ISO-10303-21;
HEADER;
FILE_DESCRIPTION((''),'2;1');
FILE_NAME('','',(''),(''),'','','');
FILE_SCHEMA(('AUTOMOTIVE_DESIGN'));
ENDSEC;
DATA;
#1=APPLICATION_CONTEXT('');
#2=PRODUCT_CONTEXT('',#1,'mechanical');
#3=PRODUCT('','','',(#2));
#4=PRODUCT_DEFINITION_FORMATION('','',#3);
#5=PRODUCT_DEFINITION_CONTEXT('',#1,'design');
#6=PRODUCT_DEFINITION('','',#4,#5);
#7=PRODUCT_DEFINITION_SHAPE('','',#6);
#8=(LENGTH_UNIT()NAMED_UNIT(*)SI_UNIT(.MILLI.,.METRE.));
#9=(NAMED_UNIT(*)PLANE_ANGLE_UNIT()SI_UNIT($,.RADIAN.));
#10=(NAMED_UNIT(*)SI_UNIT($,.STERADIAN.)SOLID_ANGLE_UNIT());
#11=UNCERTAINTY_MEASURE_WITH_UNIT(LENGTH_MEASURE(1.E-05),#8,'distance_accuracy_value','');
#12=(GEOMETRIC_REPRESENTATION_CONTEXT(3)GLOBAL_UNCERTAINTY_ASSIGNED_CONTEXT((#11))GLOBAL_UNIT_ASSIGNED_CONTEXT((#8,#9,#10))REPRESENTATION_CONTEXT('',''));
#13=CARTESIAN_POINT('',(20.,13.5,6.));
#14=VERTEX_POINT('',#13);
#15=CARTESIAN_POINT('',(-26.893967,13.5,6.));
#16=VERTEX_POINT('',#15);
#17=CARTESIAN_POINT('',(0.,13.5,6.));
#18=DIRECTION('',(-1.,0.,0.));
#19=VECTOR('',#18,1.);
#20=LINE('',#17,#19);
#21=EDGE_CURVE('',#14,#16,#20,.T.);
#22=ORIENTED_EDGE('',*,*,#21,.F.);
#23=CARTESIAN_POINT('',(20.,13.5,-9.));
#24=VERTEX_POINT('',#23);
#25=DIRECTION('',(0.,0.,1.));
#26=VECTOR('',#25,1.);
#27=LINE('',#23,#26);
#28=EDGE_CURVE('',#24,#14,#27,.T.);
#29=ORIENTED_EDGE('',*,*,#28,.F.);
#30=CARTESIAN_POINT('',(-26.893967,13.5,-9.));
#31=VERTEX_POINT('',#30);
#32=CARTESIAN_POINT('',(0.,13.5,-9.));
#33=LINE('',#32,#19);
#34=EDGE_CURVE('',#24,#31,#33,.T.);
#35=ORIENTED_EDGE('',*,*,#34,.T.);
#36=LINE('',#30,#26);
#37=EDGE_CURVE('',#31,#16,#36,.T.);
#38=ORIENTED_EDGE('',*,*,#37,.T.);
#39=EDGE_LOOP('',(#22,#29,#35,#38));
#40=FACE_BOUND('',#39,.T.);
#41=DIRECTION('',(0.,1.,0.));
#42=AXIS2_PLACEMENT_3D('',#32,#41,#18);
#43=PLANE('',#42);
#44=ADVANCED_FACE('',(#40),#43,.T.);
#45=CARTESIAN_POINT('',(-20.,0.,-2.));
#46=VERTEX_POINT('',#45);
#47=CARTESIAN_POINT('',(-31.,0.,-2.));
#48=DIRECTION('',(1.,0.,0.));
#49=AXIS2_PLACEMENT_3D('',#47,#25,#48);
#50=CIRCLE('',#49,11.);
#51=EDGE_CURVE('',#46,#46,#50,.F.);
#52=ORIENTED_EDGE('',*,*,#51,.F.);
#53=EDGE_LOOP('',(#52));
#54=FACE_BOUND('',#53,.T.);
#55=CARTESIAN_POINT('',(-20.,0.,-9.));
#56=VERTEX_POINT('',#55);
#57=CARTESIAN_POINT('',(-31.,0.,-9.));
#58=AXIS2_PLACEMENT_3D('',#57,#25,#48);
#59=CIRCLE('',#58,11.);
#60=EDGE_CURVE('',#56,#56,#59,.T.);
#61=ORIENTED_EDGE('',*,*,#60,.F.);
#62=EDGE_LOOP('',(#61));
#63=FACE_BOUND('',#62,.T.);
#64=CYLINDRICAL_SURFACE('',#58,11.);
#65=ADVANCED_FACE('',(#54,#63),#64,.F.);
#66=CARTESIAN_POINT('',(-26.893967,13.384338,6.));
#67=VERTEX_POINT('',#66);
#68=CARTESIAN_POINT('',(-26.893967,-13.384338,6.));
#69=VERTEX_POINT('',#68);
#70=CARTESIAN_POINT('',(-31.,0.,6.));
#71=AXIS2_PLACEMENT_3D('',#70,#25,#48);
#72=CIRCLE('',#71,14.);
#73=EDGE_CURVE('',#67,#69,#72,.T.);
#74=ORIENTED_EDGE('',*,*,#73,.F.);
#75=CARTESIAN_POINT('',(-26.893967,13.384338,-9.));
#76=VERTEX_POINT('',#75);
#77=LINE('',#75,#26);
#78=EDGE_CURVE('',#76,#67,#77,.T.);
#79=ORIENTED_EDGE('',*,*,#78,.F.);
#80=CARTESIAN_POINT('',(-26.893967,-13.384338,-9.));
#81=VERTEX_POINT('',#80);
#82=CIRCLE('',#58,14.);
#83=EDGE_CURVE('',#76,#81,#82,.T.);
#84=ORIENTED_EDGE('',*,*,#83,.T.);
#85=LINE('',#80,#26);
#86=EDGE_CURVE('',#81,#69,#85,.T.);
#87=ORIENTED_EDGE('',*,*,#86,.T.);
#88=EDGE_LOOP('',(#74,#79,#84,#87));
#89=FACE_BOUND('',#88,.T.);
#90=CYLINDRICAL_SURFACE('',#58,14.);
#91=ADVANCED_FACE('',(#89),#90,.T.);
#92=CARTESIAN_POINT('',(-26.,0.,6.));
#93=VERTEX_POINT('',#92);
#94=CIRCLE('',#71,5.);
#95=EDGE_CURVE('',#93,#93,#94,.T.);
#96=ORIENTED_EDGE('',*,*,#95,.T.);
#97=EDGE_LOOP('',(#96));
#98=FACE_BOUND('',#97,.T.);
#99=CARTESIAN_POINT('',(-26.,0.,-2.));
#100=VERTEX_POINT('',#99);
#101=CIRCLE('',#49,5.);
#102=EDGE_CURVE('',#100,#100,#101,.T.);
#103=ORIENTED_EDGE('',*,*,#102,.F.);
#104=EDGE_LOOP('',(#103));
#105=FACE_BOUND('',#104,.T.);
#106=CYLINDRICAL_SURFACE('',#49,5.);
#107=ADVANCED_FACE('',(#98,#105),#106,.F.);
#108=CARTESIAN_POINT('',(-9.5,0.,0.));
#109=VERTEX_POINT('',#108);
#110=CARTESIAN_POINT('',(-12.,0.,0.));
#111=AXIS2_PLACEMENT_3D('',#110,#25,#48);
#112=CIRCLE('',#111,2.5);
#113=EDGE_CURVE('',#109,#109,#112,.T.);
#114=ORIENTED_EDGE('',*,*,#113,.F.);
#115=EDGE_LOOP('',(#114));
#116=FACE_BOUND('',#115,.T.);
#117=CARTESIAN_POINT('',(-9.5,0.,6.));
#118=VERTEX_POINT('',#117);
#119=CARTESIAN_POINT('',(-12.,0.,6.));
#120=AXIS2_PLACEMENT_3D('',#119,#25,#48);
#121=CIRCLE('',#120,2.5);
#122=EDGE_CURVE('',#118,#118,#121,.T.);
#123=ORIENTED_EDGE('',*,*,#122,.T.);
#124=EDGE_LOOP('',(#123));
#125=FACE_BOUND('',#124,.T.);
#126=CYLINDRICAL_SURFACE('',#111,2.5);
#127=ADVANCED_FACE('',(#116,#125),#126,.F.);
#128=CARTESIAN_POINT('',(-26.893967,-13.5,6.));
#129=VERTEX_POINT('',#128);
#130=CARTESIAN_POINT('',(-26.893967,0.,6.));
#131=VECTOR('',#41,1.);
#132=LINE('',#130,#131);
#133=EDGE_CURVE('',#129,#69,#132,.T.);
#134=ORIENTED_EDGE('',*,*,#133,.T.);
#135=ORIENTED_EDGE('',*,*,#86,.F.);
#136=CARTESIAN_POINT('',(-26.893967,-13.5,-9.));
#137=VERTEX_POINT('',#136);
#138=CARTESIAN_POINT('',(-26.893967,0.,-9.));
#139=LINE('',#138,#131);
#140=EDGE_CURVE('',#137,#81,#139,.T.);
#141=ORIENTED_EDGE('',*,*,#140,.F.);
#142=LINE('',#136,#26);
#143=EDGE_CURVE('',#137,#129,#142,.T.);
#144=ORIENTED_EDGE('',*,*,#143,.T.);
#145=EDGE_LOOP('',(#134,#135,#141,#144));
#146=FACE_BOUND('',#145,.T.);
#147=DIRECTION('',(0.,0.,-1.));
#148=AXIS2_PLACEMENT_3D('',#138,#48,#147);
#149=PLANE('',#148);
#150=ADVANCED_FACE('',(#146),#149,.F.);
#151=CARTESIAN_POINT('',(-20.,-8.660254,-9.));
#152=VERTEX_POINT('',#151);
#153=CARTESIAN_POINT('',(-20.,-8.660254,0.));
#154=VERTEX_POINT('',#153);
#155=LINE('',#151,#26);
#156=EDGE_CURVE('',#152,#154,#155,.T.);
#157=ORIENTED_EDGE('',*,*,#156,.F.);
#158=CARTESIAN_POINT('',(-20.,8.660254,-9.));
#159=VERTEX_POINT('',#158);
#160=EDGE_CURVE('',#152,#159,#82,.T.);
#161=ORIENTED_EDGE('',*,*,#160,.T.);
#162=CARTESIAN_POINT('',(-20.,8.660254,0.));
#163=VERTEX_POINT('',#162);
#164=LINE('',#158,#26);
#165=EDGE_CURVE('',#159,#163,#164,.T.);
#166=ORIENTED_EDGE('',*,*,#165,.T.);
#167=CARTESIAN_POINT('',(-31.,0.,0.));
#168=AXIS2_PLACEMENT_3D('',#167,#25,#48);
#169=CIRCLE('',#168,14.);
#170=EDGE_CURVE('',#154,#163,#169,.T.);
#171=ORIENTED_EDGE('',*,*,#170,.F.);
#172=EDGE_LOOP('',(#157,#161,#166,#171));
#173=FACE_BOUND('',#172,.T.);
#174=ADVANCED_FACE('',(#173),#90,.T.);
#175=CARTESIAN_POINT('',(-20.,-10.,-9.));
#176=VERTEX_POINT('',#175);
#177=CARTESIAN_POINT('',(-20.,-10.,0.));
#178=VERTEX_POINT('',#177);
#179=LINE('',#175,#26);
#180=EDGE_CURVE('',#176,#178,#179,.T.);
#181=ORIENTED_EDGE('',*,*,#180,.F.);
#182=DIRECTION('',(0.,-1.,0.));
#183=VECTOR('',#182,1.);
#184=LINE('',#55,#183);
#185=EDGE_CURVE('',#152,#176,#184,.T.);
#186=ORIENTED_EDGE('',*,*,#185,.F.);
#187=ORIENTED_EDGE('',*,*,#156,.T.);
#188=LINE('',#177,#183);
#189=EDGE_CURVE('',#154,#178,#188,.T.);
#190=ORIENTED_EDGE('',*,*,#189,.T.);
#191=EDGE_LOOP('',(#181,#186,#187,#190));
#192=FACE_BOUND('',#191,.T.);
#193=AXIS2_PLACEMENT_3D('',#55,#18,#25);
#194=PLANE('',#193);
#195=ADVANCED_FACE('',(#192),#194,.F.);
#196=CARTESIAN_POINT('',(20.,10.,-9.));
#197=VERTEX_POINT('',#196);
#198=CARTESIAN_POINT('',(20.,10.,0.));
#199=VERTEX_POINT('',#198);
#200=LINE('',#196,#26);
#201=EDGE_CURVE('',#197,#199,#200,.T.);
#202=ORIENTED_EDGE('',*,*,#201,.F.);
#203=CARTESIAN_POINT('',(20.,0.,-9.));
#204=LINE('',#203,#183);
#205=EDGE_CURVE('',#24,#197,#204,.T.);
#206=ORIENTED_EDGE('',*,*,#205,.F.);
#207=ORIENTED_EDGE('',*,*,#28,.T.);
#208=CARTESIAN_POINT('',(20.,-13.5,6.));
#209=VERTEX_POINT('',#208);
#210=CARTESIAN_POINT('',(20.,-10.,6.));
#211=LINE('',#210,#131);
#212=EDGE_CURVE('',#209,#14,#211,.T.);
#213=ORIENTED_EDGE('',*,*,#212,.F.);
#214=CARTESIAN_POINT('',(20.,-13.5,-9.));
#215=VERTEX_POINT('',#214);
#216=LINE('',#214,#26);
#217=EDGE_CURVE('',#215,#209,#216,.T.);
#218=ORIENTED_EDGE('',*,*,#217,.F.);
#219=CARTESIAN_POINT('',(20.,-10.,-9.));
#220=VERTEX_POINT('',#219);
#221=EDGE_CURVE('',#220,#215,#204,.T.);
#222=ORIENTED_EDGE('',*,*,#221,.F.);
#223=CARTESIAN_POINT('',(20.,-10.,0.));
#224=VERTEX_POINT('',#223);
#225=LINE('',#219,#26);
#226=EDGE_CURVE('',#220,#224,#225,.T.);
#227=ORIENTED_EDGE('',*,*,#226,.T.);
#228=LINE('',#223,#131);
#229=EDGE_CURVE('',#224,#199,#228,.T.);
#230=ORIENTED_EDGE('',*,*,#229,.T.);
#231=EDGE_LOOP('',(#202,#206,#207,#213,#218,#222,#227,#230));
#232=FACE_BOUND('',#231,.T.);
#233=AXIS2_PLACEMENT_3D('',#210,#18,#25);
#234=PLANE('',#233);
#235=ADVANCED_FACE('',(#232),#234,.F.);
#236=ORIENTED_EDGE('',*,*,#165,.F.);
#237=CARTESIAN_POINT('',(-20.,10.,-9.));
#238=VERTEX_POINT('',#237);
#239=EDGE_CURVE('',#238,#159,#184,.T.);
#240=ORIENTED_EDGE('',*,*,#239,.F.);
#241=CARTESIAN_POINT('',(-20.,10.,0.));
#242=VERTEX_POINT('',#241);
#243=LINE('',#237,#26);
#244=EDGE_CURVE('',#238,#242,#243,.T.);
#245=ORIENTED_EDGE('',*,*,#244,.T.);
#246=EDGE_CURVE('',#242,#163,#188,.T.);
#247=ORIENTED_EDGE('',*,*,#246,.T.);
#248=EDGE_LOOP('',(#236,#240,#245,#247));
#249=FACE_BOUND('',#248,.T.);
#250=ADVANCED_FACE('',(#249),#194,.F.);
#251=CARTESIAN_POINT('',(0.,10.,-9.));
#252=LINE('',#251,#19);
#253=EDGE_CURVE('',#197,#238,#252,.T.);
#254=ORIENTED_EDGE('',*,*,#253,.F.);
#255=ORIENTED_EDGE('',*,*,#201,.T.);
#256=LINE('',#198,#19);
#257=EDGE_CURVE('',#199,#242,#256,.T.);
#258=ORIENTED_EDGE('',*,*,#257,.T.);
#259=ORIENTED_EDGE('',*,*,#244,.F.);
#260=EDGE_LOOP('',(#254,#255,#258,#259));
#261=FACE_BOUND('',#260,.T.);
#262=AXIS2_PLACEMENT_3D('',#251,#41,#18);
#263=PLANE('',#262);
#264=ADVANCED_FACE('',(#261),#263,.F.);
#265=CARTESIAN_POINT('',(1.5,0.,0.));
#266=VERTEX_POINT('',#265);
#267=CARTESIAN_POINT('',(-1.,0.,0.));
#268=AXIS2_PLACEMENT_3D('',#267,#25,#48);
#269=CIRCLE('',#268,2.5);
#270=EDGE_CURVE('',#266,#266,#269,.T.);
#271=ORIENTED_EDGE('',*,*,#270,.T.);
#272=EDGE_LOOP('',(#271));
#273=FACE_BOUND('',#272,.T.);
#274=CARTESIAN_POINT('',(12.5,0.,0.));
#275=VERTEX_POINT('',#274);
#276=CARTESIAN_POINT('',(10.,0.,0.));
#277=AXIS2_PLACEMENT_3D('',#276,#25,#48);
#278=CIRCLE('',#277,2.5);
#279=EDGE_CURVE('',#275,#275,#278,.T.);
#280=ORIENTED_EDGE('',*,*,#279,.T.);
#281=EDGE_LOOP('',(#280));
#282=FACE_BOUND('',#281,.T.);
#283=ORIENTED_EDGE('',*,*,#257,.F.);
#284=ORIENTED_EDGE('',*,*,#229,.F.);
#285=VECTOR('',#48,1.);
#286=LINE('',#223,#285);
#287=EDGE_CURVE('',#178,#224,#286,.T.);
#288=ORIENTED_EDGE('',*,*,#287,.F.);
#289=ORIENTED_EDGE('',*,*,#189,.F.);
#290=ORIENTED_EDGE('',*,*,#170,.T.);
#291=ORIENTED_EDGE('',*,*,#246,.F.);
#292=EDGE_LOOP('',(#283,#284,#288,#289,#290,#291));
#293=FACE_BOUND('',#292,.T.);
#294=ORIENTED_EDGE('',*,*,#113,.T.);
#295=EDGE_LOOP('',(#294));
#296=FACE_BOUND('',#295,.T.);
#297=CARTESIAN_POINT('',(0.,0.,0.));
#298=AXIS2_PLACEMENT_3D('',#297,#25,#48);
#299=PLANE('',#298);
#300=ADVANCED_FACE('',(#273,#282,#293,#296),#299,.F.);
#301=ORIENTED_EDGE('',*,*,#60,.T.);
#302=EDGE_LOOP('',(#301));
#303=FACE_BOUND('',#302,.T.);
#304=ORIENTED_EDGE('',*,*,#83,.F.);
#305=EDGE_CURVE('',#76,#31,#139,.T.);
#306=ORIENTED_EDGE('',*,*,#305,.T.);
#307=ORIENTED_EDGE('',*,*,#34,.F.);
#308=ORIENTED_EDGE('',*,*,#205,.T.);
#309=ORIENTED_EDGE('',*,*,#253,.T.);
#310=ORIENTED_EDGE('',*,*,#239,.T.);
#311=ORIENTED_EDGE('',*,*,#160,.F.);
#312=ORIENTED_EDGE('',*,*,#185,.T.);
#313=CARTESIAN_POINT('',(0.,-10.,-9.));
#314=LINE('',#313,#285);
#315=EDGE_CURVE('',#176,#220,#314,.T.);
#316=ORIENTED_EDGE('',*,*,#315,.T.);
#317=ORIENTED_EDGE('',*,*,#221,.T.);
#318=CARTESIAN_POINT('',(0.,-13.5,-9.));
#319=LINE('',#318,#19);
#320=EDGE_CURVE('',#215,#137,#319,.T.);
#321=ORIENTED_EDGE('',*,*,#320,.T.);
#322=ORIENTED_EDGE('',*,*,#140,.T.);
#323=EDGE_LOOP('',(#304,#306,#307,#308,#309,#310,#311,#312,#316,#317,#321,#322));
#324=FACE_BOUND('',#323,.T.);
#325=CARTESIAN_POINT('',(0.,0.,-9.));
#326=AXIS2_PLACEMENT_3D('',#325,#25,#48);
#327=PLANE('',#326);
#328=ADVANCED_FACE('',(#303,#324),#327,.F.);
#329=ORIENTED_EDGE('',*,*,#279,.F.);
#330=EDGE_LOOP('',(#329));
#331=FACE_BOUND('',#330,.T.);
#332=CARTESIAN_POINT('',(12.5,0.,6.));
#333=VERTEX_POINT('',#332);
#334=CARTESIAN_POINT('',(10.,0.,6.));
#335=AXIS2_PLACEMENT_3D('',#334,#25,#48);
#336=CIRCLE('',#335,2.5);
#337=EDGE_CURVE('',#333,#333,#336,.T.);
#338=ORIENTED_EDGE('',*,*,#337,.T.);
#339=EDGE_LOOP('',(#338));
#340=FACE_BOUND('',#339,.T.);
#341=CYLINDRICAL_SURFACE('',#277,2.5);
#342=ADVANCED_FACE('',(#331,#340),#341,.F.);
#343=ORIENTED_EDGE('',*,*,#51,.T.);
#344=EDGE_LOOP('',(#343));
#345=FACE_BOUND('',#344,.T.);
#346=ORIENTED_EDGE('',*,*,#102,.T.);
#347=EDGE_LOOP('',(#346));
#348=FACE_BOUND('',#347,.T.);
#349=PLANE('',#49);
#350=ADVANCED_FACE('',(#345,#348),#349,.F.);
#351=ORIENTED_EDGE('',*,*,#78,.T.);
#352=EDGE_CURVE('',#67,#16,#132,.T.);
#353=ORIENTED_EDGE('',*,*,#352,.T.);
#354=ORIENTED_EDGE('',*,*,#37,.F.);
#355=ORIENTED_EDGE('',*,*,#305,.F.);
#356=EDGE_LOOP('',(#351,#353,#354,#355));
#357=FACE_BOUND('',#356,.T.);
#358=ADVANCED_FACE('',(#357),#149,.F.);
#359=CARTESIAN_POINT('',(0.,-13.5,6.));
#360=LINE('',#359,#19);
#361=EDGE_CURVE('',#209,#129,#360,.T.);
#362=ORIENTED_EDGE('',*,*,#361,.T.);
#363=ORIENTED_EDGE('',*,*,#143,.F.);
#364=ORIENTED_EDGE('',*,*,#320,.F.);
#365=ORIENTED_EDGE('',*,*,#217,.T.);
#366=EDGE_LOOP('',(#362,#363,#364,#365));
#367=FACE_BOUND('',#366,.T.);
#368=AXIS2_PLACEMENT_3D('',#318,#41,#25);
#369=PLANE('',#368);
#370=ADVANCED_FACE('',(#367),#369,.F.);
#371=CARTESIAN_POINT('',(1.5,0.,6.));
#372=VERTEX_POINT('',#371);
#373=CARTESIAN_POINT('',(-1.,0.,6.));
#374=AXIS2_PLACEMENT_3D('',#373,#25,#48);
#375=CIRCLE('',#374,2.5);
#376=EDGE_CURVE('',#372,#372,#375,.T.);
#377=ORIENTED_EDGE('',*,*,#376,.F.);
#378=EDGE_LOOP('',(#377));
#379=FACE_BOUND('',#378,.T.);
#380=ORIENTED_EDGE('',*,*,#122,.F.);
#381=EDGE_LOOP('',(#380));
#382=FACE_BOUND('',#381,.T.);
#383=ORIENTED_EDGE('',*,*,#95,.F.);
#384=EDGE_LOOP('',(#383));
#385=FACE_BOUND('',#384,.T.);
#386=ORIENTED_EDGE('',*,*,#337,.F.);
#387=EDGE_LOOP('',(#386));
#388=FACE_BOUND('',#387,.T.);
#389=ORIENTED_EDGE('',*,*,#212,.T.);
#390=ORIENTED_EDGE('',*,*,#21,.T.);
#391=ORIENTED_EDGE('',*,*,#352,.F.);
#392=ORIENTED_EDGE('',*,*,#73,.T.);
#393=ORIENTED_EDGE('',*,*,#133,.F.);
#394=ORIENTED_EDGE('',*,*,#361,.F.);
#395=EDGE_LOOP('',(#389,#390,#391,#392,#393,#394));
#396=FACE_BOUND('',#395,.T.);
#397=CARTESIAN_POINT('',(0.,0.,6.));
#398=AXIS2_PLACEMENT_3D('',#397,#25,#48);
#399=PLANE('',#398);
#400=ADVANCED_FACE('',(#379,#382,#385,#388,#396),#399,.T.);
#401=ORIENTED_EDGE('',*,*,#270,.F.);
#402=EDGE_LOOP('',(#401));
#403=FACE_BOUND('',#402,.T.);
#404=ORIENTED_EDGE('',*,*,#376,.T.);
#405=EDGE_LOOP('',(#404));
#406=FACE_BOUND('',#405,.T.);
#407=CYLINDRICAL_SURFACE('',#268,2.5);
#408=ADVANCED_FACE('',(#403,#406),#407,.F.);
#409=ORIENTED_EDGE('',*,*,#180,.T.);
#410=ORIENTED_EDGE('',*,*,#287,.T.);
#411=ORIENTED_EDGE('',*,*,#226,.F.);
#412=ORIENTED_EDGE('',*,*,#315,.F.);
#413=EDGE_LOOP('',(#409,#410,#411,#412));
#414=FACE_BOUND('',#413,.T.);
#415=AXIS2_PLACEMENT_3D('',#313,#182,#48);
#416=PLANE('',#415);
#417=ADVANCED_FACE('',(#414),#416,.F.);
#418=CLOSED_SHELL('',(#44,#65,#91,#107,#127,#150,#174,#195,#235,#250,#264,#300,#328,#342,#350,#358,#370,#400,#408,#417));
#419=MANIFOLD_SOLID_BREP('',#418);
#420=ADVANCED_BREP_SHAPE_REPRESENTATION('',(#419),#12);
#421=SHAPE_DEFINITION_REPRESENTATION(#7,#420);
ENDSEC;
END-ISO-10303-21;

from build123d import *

# Parameters (mm, degrees)
SKETCH_1_W          = 40
SKETCH_1_H          = 20
EXTRUDE_1_DEPTH     = 6
SKETCH_2_R          = 2.5
CUT_EXTRUDE_1_DEPTH = 24.151673806
SKETCH_3_R          = 11
EXTRUDE_2_DEPTH     = 15
SKETCH_6_R          = 11
SKETCH_6_R_2        = 5
EXTRUDE_3_DEPTH     = 8


with BuildPart() as part:
    # 草图1 → 凸台-拉伸1 (new body)
    with BuildSketch(Plane.XY):
        Rectangle(SKETCH_1_W, SKETCH_1_H)
    extrude(amount=EXTRUDE_1_DEPTH)

    # 草图2 → 切除-拉伸1 (cut, through all)
    with BuildSketch(Plane.XY.offset(6)):
        with Locations((10, 0)):
            Circle(SKETCH_2_R)
        with Locations((-1, 0)):
            Circle(SKETCH_2_R)
        with Locations((-12, 0)):
            Circle(SKETCH_2_R)
    extrude(amount=-CUT_EXTRUDE_1_DEPTH, mode=Mode.SUBTRACT)

    # 草图3 → 凸台-拉伸2 (add)
    with BuildSketch(Plane.XY.offset(6)):
        with BuildLine():
            Line((20, 10), (20, 13.5))
            Line((20, 13.5), (-26.893967141, 13.5))
            Line((-26.893967141, 13.5), (-26.893967141, 13.384337644))
            ThreePointArc((-26.893967141, 13.384337644), (-45, 0), (-26.893967141, -13.384337644))
            Line((-26.893967141, -13.384337644), (-26.893967141, -13.5))
            Line((-26.893967141, -13.5), (20, -13.5))
            Line((20, -13.5), (20, -10))
            Line((20, -10), (-20, -10))
            Line((-20, -10), (-20, -8.660254038))
            ThreePointArc((-20, -8.660254038), (-17, 0), (-20, 8.660254038))
            Line((-20, 8.660254038), (-20, 10))
            Line((-20, 10), (20, 10))
        make_face()
        with Locations((-31, 0)):
            Circle(SKETCH_3_R, mode=Mode.SUBTRACT)
    extrude(amount=-EXTRUDE_2_DEPTH)

    # 草图6 → 凸台-拉伸3 (add)
    with BuildSketch(Plane.XY.offset(6)):
        with Locations((-31, 0)):
            Circle(SKETCH_6_R)
        with Locations((-31, 0)):
            Circle(SKETCH_6_R_2, mode=Mode.SUBTRACT)
    extrude(amount=-EXTRUDE_3_DEPTH)


solid = part.part
